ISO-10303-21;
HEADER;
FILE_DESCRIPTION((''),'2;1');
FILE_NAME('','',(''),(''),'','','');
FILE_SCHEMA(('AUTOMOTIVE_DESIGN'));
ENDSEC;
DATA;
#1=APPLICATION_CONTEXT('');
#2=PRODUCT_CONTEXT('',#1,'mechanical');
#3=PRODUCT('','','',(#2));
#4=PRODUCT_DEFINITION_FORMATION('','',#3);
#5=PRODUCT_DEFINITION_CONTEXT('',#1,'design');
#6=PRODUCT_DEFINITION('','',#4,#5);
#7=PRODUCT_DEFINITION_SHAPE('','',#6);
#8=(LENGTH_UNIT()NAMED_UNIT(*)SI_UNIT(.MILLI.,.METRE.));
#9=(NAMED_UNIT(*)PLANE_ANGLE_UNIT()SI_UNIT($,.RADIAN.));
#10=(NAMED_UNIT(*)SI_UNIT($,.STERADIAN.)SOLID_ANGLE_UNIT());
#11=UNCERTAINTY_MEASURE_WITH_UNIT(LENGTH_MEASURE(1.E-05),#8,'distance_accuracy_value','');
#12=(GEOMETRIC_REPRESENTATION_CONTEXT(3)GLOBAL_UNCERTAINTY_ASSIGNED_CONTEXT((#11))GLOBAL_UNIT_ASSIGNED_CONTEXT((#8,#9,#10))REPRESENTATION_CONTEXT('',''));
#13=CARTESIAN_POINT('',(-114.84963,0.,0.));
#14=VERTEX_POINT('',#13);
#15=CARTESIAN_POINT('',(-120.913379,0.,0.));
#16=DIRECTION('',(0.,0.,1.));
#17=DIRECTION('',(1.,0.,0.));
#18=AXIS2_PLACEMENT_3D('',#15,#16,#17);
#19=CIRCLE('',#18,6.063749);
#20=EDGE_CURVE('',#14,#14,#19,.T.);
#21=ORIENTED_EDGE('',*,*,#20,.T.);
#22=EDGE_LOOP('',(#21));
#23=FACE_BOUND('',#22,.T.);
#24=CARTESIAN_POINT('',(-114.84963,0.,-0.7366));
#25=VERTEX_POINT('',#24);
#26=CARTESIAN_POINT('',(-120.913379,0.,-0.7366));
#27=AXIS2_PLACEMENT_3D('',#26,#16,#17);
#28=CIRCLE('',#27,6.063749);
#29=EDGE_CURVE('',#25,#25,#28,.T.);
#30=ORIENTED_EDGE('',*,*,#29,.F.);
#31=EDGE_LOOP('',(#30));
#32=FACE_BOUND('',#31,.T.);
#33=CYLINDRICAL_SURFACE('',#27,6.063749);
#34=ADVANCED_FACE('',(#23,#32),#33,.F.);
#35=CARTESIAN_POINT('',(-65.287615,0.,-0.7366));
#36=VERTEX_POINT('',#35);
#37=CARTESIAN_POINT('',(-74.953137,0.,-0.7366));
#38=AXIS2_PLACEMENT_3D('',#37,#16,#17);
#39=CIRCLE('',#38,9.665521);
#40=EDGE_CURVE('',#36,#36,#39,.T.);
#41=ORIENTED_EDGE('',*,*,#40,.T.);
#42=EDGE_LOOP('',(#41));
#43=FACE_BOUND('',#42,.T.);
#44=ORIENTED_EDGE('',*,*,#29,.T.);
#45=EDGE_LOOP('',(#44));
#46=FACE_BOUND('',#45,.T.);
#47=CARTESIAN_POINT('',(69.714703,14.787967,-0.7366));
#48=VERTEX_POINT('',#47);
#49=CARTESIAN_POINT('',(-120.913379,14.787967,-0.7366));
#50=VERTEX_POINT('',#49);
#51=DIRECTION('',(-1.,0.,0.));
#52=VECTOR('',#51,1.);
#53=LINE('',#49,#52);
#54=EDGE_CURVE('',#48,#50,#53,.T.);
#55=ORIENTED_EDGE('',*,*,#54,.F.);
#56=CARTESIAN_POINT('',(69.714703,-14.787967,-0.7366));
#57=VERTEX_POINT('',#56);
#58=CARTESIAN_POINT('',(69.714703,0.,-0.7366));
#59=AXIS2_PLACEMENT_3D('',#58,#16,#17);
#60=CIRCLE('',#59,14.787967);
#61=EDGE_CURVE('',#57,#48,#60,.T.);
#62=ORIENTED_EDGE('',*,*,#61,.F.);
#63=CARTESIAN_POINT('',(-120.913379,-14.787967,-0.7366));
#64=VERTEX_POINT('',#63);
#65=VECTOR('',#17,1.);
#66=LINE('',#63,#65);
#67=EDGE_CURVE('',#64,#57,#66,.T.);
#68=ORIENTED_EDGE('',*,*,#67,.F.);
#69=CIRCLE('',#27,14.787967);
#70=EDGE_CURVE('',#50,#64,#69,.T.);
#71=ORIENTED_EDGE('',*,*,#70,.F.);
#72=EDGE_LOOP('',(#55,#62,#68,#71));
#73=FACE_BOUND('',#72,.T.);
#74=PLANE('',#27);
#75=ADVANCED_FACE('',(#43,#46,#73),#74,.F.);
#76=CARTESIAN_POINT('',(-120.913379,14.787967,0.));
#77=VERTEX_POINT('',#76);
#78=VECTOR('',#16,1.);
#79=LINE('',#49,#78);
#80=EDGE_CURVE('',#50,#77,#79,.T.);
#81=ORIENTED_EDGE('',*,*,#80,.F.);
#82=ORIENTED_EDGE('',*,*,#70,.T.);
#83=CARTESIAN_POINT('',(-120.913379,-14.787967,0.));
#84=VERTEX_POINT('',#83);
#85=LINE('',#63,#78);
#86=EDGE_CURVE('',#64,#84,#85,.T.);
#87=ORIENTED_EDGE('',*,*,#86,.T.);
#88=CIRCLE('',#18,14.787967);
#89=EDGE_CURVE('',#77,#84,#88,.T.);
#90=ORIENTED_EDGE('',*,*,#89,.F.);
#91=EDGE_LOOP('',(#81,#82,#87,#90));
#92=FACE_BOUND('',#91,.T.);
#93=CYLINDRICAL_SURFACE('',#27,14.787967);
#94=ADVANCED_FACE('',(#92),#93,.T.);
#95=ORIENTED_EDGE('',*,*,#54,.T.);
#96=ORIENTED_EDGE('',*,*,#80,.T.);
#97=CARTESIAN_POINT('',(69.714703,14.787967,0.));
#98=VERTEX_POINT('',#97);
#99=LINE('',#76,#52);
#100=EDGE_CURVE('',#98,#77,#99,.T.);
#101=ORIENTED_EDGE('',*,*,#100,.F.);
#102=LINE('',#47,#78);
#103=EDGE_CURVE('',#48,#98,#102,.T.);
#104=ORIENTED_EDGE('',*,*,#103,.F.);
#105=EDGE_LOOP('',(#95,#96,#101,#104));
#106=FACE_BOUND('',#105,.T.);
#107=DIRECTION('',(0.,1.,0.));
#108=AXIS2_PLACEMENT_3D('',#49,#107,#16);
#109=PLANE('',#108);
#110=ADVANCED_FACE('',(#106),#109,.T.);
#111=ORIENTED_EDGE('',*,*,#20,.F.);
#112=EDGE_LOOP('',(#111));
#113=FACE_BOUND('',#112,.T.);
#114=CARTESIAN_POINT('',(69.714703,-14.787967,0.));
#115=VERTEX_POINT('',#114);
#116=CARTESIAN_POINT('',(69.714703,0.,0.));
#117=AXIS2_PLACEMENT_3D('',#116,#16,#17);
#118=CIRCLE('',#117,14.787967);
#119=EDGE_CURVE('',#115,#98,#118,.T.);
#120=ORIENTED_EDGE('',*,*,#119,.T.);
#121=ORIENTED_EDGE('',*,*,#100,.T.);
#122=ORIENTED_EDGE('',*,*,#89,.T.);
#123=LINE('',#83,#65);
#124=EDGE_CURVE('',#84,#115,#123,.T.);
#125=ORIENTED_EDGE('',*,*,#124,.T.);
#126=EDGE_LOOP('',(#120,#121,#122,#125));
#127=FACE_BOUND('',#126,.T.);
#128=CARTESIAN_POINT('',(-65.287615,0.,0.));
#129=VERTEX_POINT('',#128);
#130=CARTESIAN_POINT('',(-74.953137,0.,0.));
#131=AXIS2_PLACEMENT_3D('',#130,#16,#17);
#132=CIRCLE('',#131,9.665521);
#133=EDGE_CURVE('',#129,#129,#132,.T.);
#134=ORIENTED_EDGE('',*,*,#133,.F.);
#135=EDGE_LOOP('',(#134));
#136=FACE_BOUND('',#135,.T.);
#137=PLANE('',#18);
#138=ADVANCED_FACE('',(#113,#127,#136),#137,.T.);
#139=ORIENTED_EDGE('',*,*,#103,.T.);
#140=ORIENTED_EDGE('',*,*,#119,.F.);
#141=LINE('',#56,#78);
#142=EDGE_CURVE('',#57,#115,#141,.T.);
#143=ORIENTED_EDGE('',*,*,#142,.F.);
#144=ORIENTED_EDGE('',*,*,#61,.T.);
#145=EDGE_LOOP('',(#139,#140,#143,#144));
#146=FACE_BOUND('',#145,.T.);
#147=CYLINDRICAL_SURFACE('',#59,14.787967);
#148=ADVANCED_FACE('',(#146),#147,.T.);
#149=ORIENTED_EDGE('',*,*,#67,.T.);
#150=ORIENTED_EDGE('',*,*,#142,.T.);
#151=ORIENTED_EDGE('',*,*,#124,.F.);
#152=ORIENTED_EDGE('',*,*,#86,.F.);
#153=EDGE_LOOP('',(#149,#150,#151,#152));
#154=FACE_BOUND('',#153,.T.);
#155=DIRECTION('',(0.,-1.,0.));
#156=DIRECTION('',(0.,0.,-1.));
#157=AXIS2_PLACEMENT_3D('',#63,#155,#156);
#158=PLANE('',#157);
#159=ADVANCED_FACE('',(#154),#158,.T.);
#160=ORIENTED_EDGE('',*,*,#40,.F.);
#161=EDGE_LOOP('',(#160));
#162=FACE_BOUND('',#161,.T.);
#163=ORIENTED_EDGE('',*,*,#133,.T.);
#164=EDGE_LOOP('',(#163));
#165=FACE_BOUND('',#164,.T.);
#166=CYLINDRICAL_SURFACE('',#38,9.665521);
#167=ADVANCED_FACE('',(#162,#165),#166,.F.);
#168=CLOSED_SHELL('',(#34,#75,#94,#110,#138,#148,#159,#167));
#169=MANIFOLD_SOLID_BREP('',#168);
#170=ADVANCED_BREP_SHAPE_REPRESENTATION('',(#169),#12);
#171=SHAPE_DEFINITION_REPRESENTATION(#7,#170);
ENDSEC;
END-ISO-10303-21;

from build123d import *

# Parameters (mm, degrees)
SKETCH1_R          = 9.66552125
SKETCH1_R_2        = 6.063748993
BASE_FLANGE1_DEPTH = 0.7366


# Sheet-metal steps are written as plain solids
with BuildPart() as part:
    # Sketch1 → Base-Flange1 (new body)
    with BuildSketch(Plane.XY):
        with BuildLine():
            Line((-120.91337904, 14.787967221), (69.714702612, 14.787967221))
            ThreePointArc((69.714702612, 14.787967221), (84.502669832, 0), (69.714702612, -14.787967221))
            Line((69.714702612, -14.787967221), (-120.91337904, -14.787967221))
            ThreePointArc((-120.91337904, -14.787967221), (-135.70134626, 0), (-120.91337904, 14.787967221))
        make_face()
        with Locations((-74.953136666, 0)):
            Circle(SKETCH1_R, mode=Mode.SUBTRACT)
        with Locations((-120.91337904, 0)):
            Circle(SKETCH1_R_2, mode=Mode.SUBTRACT)
    extrude(amount=-BASE_FLANGE1_DEPTH)


solid = part.part
